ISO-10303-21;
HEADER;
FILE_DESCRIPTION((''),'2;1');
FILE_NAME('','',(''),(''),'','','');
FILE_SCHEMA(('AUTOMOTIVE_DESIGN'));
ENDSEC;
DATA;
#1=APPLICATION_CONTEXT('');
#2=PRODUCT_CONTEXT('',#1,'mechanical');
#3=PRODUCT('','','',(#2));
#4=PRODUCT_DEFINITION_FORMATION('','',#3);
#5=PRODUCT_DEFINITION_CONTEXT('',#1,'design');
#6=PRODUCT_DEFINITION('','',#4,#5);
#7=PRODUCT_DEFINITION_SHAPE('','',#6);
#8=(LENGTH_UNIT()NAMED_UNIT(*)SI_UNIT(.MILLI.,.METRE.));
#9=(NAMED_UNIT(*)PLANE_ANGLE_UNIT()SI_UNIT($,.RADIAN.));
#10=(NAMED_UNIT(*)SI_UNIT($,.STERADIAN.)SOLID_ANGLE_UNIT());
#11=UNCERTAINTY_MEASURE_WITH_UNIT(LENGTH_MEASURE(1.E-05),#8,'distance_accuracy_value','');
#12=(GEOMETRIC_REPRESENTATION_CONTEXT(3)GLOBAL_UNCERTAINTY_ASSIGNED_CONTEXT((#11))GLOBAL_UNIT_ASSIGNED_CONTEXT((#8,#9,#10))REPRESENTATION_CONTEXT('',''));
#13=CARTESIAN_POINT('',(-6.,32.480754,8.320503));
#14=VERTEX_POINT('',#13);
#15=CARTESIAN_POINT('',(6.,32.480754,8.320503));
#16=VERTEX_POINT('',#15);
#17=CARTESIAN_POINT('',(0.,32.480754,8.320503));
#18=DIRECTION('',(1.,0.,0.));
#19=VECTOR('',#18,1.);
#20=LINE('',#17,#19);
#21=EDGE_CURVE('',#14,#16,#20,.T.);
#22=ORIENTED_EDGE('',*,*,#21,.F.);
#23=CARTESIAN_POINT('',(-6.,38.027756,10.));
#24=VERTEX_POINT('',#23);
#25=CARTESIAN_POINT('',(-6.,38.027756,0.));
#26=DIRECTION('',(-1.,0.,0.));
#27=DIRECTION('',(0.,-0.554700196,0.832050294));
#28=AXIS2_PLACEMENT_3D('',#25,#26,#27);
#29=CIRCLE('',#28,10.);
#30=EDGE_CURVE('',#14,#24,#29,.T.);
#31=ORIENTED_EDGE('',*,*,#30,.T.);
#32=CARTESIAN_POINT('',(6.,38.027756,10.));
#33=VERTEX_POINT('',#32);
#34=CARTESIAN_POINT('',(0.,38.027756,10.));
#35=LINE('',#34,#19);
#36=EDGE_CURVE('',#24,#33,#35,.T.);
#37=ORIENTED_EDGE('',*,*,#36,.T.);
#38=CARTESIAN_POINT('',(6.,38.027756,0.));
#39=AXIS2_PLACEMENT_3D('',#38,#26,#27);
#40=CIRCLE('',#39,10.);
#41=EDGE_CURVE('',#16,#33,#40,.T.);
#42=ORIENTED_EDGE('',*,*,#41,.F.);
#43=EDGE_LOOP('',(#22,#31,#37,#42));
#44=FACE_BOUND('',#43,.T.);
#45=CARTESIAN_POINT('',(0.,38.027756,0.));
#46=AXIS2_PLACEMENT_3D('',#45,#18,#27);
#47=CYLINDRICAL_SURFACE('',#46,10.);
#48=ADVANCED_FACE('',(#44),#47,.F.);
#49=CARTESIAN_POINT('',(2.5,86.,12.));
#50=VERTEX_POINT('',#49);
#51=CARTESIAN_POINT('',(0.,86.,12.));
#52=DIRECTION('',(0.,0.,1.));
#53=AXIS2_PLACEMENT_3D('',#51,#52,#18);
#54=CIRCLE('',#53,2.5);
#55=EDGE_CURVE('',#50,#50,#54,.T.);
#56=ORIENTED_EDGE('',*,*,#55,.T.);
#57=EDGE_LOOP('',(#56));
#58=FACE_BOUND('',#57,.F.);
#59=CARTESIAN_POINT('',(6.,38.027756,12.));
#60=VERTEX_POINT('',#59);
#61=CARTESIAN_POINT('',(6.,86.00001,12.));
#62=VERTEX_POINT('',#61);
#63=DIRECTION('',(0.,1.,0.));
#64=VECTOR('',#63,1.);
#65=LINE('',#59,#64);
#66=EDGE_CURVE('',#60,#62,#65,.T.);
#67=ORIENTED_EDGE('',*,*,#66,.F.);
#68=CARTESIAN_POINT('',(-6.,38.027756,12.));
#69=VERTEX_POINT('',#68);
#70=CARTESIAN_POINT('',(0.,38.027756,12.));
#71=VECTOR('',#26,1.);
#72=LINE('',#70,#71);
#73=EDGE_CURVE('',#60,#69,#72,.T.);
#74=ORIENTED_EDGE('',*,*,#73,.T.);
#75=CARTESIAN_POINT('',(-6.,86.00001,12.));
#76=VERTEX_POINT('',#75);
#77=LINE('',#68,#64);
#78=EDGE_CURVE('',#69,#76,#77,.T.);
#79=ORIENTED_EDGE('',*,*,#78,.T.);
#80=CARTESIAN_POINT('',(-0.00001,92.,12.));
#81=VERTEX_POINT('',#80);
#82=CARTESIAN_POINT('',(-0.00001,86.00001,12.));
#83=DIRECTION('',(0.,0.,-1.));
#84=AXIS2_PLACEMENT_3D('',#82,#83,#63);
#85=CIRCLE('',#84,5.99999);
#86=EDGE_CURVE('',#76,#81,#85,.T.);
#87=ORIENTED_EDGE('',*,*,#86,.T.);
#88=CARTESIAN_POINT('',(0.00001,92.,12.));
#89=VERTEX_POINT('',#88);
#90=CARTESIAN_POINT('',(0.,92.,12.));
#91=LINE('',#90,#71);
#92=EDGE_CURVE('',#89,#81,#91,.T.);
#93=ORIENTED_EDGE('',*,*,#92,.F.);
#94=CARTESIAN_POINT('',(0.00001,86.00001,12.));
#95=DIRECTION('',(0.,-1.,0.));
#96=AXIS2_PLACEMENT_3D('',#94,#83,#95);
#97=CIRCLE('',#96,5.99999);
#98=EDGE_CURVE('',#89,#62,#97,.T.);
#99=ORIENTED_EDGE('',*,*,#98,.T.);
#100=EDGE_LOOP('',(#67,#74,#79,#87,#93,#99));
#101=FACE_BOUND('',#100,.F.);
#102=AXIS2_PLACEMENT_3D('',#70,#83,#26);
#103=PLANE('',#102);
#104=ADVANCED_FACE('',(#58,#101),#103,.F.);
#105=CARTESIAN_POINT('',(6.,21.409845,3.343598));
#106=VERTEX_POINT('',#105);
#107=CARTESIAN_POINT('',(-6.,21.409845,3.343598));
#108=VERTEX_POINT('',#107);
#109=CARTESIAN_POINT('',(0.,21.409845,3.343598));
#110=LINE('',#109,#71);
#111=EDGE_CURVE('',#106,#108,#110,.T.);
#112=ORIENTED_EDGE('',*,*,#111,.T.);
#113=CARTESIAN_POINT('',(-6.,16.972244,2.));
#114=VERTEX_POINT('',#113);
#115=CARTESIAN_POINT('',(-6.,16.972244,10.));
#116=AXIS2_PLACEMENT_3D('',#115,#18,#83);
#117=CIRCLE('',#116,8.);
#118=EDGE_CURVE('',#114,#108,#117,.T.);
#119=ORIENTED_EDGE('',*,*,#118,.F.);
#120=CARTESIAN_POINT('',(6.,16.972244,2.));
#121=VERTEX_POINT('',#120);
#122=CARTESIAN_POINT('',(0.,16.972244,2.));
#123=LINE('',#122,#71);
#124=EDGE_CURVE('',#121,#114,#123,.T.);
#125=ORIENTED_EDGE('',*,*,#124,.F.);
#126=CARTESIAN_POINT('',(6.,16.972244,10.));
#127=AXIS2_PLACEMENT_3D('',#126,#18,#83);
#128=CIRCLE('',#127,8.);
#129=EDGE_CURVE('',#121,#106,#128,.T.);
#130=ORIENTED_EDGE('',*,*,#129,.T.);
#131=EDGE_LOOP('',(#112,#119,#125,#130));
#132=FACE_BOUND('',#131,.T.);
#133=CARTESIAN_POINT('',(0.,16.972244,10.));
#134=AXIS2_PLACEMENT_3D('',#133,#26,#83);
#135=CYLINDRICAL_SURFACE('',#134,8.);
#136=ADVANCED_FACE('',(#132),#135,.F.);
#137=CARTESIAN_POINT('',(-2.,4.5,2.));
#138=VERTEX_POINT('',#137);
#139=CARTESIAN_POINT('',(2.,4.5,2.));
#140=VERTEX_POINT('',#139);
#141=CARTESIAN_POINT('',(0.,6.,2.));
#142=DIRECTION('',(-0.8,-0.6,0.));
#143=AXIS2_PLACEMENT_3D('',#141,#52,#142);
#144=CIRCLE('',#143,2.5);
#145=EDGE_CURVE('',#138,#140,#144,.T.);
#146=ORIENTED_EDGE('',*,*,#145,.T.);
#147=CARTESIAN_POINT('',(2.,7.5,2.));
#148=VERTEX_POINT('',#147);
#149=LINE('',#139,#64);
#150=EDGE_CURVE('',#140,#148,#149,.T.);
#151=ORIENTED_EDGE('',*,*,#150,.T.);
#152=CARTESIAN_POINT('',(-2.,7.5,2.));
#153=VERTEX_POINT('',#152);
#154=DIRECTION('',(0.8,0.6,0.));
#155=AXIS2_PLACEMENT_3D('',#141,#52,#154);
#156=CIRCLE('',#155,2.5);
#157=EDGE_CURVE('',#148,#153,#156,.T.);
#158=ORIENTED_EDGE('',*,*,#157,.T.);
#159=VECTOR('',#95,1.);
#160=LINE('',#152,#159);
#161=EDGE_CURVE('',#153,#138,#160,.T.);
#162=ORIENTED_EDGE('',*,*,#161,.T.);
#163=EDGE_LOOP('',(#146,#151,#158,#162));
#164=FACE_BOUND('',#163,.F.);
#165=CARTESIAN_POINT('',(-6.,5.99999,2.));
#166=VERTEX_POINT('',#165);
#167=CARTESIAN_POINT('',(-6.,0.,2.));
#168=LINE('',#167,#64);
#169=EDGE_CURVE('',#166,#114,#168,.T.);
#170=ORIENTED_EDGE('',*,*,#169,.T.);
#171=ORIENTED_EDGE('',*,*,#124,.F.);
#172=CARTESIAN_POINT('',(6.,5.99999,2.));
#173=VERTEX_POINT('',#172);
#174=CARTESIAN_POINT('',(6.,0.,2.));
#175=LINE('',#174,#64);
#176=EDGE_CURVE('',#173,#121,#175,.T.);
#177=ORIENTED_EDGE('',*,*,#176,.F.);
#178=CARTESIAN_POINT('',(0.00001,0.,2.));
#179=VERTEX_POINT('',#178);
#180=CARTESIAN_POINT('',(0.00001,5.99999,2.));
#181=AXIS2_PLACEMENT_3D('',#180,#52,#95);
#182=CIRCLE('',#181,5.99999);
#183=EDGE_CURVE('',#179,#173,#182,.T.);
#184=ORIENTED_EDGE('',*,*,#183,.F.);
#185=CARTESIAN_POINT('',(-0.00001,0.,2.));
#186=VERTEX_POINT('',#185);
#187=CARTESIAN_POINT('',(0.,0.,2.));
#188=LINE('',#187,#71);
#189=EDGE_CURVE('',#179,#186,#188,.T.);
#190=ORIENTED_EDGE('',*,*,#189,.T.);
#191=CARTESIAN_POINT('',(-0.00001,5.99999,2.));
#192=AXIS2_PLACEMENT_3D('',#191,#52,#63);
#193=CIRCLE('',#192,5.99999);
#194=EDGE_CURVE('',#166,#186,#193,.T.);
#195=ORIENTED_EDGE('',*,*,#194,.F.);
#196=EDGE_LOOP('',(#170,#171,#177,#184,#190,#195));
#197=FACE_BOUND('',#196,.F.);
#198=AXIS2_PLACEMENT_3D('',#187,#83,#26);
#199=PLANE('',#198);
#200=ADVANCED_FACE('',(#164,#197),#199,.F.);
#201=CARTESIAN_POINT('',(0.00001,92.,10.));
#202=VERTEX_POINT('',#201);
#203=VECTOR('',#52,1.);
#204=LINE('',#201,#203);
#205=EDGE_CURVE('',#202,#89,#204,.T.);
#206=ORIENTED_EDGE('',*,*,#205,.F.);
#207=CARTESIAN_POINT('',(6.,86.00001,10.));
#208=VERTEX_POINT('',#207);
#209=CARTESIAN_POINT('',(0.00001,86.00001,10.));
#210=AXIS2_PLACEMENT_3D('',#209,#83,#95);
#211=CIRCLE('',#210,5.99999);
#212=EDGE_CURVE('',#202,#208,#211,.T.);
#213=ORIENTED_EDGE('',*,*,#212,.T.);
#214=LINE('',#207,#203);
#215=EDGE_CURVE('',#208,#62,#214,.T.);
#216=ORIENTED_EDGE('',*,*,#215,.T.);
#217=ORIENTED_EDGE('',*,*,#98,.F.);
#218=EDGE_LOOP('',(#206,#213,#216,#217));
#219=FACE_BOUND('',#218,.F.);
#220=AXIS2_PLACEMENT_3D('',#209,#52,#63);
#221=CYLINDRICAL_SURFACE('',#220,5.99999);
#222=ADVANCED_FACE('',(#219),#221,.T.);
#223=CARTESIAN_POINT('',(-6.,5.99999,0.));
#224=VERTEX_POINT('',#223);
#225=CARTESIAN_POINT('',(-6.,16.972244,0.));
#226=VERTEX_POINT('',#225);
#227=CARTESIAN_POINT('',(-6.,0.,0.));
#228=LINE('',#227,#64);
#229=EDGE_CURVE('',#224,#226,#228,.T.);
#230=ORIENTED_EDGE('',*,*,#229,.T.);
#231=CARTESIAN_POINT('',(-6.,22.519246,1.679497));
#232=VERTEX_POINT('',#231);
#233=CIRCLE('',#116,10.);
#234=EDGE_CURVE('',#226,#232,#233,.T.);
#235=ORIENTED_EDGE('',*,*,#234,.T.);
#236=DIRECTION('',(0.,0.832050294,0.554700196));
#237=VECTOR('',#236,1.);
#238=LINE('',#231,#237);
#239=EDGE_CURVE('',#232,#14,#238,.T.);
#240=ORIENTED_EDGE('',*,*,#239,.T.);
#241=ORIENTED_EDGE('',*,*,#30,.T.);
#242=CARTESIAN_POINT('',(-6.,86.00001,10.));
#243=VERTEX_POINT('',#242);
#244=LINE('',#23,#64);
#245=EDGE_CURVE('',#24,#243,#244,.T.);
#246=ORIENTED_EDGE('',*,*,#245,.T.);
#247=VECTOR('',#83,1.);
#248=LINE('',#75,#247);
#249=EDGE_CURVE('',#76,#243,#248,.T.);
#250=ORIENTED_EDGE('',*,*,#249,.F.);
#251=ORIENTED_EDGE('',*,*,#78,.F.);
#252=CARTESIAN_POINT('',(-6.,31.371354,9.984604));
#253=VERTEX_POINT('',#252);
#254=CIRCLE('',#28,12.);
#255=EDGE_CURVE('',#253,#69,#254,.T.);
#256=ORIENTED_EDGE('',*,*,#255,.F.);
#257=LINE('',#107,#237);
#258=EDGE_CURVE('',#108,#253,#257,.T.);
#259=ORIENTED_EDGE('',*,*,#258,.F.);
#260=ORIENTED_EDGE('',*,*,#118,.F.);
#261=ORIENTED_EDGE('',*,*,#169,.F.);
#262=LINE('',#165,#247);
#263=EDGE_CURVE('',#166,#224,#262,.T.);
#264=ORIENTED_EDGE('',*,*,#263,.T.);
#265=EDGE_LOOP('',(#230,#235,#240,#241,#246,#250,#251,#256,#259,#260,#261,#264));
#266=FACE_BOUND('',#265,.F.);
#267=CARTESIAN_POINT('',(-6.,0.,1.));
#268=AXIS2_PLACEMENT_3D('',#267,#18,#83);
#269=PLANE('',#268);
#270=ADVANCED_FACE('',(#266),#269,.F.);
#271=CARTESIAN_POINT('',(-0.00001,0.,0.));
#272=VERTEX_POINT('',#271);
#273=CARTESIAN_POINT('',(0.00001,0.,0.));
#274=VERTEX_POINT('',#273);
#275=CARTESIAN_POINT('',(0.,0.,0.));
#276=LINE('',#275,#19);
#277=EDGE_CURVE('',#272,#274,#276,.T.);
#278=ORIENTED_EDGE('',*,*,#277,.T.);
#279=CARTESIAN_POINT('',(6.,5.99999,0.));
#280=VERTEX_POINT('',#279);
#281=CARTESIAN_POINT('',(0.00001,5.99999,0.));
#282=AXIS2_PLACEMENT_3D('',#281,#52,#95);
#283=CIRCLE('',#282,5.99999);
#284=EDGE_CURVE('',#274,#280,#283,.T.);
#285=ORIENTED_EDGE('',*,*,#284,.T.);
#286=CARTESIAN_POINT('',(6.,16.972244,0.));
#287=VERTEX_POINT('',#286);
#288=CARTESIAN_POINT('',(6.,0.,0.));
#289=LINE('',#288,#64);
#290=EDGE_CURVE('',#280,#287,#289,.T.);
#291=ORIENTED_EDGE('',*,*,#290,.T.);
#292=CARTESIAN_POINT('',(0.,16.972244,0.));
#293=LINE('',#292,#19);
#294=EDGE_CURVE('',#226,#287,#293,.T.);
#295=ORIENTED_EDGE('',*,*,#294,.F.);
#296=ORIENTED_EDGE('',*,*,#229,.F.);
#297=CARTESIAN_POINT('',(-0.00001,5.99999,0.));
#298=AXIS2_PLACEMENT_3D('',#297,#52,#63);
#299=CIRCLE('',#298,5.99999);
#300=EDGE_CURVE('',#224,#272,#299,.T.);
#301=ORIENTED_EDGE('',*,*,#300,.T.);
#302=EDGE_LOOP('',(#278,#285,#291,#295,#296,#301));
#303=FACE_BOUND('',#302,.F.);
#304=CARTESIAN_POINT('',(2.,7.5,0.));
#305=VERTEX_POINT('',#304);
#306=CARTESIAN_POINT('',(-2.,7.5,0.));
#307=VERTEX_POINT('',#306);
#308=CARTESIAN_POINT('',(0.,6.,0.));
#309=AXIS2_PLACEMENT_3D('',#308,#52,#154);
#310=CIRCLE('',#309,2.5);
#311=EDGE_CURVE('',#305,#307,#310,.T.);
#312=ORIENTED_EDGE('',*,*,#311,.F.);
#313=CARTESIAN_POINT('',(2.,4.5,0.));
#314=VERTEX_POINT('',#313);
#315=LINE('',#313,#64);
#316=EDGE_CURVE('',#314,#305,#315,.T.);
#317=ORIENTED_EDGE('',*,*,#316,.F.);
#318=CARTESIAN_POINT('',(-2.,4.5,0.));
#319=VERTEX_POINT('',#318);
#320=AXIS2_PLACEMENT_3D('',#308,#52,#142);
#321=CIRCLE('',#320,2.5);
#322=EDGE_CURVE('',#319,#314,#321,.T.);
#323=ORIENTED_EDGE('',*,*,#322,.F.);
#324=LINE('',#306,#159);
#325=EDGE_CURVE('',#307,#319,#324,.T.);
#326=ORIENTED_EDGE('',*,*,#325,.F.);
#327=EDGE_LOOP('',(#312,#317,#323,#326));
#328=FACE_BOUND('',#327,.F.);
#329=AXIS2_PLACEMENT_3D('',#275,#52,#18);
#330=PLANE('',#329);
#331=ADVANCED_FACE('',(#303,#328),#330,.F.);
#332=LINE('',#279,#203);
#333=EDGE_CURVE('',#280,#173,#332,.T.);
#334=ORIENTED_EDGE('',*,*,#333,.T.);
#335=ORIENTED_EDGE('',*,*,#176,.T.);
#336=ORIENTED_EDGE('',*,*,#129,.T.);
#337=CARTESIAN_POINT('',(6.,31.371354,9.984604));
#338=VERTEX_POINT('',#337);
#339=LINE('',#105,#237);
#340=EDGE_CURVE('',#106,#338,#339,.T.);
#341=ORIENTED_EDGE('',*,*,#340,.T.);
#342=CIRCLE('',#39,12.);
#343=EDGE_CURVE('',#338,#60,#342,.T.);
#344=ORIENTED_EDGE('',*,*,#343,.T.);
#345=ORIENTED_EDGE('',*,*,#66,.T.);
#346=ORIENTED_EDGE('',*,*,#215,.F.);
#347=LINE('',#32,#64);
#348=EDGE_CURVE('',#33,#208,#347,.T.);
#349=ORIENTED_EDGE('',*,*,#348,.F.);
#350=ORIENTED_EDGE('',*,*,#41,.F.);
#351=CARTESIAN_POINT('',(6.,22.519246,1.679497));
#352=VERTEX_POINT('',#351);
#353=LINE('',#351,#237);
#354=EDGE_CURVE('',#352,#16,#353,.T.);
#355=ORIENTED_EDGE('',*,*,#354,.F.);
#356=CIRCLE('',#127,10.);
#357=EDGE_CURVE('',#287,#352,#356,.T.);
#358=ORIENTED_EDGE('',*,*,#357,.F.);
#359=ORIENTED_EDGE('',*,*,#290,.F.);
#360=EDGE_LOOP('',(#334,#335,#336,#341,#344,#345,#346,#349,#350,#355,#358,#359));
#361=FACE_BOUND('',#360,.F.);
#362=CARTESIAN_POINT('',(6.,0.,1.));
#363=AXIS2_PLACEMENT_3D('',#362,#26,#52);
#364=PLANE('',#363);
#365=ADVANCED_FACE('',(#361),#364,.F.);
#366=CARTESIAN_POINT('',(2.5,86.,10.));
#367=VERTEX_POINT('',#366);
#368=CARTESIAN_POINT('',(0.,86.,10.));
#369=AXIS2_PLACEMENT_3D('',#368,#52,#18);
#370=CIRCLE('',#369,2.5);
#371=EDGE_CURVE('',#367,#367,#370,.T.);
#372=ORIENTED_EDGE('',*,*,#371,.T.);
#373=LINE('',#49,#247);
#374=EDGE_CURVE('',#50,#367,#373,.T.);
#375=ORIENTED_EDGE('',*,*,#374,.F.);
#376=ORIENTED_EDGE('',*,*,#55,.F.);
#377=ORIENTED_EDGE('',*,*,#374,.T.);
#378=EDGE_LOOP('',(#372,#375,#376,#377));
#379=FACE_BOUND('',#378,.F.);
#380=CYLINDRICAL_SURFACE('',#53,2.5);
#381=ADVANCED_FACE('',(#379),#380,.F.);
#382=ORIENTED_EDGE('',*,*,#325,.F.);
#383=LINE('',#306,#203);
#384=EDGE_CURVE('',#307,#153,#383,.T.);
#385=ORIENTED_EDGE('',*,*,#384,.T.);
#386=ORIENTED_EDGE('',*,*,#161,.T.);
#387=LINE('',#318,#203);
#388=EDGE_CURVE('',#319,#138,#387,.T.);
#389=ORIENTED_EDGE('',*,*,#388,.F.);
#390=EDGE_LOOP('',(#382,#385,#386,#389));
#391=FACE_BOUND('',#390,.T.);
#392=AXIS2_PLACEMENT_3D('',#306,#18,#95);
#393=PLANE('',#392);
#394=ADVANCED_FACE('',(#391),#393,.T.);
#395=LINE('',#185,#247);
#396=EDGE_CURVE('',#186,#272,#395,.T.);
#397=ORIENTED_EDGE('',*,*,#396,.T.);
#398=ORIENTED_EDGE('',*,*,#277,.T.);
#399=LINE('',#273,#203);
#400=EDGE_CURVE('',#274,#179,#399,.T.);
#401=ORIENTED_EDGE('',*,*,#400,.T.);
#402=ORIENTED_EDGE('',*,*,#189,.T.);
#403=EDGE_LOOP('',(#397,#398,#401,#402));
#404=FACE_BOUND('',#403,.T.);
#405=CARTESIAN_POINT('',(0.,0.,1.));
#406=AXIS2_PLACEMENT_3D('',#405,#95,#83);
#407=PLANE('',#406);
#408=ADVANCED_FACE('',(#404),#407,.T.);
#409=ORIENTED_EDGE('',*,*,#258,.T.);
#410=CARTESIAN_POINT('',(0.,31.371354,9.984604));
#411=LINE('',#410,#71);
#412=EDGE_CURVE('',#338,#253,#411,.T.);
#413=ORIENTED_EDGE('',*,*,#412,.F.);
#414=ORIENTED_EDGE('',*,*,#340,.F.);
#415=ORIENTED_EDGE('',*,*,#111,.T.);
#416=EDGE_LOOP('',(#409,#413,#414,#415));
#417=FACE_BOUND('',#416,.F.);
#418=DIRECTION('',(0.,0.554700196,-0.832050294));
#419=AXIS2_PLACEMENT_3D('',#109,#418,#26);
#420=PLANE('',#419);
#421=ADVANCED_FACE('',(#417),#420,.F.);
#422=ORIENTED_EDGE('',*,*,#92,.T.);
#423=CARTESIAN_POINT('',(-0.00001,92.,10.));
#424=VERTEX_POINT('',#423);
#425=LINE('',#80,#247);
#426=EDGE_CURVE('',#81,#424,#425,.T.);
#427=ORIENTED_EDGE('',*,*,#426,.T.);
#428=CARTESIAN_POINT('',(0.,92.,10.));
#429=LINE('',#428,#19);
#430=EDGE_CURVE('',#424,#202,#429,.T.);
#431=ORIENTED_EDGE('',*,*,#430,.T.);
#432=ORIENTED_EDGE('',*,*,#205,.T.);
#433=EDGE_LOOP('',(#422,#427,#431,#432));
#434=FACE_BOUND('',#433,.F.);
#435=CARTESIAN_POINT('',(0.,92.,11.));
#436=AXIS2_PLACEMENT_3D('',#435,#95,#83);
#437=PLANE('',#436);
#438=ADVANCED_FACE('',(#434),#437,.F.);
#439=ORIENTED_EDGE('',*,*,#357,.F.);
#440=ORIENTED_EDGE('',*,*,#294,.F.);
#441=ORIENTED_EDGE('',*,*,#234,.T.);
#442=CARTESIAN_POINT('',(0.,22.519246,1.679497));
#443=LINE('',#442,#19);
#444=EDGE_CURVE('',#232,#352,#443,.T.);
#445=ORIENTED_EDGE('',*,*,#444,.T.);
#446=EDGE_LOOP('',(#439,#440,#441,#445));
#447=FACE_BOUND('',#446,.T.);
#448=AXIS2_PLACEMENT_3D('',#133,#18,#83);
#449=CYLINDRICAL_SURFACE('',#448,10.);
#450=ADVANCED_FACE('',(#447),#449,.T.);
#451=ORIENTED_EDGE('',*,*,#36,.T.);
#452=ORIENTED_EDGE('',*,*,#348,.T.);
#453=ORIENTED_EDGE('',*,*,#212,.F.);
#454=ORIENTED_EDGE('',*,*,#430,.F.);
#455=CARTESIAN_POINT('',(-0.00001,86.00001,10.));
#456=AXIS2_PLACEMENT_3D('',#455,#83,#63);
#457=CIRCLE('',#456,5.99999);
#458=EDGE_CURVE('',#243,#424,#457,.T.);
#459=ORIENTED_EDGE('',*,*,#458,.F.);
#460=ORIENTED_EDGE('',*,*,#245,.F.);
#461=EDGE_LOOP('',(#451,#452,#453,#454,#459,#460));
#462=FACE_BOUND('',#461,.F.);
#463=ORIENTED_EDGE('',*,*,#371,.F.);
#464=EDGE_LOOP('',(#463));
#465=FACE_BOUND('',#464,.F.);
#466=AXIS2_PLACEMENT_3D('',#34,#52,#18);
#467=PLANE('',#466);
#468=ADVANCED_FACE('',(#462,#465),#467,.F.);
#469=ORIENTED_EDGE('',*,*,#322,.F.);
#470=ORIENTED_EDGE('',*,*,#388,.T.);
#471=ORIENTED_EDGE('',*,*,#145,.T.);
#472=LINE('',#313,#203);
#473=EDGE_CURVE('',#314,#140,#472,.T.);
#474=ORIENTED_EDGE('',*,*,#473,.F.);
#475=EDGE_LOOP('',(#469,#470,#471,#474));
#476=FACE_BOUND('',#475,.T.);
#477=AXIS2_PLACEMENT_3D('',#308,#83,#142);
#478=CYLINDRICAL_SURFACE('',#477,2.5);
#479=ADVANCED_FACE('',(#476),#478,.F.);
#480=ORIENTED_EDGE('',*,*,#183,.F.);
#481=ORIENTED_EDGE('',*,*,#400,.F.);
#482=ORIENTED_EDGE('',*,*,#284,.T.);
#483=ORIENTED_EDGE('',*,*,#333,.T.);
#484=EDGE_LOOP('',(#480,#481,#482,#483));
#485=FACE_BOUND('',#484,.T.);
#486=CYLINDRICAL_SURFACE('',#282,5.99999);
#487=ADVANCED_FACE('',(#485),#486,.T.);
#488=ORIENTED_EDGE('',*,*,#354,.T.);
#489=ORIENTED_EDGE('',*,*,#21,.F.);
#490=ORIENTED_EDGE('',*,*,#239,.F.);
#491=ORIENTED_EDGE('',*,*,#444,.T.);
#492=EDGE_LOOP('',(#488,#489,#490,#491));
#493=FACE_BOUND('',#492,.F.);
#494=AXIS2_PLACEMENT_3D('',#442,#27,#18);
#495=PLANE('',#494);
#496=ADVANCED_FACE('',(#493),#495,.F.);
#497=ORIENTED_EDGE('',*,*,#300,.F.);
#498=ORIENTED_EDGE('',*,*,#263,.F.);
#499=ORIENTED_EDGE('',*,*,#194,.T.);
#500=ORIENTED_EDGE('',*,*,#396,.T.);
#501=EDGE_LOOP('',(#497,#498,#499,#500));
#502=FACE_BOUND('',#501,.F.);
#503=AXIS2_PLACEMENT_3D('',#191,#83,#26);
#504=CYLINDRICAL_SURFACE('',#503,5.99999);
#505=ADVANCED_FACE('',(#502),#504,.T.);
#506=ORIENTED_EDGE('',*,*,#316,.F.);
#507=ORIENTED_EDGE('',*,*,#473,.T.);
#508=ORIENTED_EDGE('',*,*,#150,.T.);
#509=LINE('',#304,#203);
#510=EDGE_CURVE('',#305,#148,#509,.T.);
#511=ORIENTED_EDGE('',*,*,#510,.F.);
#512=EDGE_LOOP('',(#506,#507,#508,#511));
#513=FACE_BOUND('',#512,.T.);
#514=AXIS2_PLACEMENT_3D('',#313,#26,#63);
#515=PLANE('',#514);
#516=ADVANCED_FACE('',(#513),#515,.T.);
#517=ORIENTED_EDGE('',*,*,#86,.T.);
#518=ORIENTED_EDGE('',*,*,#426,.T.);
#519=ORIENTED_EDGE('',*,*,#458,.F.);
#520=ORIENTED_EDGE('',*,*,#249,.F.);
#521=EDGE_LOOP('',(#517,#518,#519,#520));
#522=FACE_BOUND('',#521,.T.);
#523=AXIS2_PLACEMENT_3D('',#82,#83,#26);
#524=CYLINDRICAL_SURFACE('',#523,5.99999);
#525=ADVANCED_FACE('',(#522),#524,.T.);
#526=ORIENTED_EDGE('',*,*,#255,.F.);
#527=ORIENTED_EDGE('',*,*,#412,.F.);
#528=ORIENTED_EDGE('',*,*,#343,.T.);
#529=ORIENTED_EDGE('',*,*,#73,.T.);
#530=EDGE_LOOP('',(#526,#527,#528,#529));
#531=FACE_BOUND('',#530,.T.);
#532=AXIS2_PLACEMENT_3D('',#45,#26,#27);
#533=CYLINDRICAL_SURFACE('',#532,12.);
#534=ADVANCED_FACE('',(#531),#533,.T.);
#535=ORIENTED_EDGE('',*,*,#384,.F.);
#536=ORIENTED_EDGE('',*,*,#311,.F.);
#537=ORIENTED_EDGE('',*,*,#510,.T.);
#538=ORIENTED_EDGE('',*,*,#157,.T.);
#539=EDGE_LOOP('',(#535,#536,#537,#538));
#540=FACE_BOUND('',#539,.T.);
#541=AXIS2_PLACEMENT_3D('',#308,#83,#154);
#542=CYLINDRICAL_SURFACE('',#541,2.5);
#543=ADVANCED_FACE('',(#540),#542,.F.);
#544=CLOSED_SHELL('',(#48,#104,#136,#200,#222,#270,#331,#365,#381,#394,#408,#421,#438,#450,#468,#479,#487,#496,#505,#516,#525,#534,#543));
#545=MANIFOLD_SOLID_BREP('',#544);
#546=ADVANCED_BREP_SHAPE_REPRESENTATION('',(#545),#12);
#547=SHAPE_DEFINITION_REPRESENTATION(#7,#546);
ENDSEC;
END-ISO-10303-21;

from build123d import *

# Parameters (mm, degrees)
F1_W     = 12
F1_H     = 2
F4_DEPTH = 2
F5_R     = 2.5
F6_DEPTH = 2
F7_R     = 5.99999
F8_R     = 5.99999


# Not quite as in the source:
# - a fillet or chamfer is up to 0.001 mm smaller than in the source, because OpenCascade refuses the exact size


with BuildPart() as f2:
    # F2: sweep along a path in F0
    with BuildLine(Plane.YZ) as f2_path:
        Line((0, 0), (16.9722436227, 0))
        ThreePointArc((16.9722436227, 0), (19.8700851096, 0.4290797351), (22.5192455849, 1.6794970566))
        Line((22.5192455849, 1.6794970566), (32.4807544151, 8.3205029434))
        ThreePointArc((32.4807544151, 8.3205029434), (35.1299148904, 9.5709202649), (38.0277563773, 10))
        Line((38.0277563773, 10), (92, 10))
    # F1 (on Front) → F2 (sweep)
    with BuildSketch(Plane.XZ):
        with Locations((0, 1)):
            Rectangle(F1_W, F1_H)
    sweep(path=f2_path.line)

    # F3 (on Top) → F4 (cut, through all)
    with BuildSketch(Plane.XY):
        with BuildLine():
            Line((2, 4.5), (2, 7.5))
            ThreePointArc((2, 7.5), (0, 8.5), (-2, 7.5))
            Line((-2, 7.5), (-2, 4.5))
            ThreePointArc((-2, 4.5), (0, 3.5), (2, 4.5))
        make_face()
    extrude(amount=F4_DEPTH, mode=Mode.SUBTRACT)

    # F5 (on face) → F6 (cut, through all)
    with BuildSketch(Plane.XY.offset(12)):
        with Locations((0, 86)):
            Circle(F5_R)
    extrude(amount=-F6_DEPTH, mode=Mode.SUBTRACT)

    # F7 (radius 6 in the source; OpenCascade refuses exactly that, so slightly less here)
    f7_edges = [f2.edges().sort_by_distance(p)[0] for p in [
        (6, 0, 1),
        (-6, 0, 1),
    ]]
    fillet(f7_edges, radius=F7_R)

    # F8 (radius 6 in the source; OpenCascade refuses exactly that, so slightly less here)
    f8_edges = [f2.edges().sort_by_distance(p)[0] for p in [
        (-6, 92, 11),
        (6, 92, 11),
    ]]
    fillet(f8_edges, radius=F8_R)


solid = f2.part
